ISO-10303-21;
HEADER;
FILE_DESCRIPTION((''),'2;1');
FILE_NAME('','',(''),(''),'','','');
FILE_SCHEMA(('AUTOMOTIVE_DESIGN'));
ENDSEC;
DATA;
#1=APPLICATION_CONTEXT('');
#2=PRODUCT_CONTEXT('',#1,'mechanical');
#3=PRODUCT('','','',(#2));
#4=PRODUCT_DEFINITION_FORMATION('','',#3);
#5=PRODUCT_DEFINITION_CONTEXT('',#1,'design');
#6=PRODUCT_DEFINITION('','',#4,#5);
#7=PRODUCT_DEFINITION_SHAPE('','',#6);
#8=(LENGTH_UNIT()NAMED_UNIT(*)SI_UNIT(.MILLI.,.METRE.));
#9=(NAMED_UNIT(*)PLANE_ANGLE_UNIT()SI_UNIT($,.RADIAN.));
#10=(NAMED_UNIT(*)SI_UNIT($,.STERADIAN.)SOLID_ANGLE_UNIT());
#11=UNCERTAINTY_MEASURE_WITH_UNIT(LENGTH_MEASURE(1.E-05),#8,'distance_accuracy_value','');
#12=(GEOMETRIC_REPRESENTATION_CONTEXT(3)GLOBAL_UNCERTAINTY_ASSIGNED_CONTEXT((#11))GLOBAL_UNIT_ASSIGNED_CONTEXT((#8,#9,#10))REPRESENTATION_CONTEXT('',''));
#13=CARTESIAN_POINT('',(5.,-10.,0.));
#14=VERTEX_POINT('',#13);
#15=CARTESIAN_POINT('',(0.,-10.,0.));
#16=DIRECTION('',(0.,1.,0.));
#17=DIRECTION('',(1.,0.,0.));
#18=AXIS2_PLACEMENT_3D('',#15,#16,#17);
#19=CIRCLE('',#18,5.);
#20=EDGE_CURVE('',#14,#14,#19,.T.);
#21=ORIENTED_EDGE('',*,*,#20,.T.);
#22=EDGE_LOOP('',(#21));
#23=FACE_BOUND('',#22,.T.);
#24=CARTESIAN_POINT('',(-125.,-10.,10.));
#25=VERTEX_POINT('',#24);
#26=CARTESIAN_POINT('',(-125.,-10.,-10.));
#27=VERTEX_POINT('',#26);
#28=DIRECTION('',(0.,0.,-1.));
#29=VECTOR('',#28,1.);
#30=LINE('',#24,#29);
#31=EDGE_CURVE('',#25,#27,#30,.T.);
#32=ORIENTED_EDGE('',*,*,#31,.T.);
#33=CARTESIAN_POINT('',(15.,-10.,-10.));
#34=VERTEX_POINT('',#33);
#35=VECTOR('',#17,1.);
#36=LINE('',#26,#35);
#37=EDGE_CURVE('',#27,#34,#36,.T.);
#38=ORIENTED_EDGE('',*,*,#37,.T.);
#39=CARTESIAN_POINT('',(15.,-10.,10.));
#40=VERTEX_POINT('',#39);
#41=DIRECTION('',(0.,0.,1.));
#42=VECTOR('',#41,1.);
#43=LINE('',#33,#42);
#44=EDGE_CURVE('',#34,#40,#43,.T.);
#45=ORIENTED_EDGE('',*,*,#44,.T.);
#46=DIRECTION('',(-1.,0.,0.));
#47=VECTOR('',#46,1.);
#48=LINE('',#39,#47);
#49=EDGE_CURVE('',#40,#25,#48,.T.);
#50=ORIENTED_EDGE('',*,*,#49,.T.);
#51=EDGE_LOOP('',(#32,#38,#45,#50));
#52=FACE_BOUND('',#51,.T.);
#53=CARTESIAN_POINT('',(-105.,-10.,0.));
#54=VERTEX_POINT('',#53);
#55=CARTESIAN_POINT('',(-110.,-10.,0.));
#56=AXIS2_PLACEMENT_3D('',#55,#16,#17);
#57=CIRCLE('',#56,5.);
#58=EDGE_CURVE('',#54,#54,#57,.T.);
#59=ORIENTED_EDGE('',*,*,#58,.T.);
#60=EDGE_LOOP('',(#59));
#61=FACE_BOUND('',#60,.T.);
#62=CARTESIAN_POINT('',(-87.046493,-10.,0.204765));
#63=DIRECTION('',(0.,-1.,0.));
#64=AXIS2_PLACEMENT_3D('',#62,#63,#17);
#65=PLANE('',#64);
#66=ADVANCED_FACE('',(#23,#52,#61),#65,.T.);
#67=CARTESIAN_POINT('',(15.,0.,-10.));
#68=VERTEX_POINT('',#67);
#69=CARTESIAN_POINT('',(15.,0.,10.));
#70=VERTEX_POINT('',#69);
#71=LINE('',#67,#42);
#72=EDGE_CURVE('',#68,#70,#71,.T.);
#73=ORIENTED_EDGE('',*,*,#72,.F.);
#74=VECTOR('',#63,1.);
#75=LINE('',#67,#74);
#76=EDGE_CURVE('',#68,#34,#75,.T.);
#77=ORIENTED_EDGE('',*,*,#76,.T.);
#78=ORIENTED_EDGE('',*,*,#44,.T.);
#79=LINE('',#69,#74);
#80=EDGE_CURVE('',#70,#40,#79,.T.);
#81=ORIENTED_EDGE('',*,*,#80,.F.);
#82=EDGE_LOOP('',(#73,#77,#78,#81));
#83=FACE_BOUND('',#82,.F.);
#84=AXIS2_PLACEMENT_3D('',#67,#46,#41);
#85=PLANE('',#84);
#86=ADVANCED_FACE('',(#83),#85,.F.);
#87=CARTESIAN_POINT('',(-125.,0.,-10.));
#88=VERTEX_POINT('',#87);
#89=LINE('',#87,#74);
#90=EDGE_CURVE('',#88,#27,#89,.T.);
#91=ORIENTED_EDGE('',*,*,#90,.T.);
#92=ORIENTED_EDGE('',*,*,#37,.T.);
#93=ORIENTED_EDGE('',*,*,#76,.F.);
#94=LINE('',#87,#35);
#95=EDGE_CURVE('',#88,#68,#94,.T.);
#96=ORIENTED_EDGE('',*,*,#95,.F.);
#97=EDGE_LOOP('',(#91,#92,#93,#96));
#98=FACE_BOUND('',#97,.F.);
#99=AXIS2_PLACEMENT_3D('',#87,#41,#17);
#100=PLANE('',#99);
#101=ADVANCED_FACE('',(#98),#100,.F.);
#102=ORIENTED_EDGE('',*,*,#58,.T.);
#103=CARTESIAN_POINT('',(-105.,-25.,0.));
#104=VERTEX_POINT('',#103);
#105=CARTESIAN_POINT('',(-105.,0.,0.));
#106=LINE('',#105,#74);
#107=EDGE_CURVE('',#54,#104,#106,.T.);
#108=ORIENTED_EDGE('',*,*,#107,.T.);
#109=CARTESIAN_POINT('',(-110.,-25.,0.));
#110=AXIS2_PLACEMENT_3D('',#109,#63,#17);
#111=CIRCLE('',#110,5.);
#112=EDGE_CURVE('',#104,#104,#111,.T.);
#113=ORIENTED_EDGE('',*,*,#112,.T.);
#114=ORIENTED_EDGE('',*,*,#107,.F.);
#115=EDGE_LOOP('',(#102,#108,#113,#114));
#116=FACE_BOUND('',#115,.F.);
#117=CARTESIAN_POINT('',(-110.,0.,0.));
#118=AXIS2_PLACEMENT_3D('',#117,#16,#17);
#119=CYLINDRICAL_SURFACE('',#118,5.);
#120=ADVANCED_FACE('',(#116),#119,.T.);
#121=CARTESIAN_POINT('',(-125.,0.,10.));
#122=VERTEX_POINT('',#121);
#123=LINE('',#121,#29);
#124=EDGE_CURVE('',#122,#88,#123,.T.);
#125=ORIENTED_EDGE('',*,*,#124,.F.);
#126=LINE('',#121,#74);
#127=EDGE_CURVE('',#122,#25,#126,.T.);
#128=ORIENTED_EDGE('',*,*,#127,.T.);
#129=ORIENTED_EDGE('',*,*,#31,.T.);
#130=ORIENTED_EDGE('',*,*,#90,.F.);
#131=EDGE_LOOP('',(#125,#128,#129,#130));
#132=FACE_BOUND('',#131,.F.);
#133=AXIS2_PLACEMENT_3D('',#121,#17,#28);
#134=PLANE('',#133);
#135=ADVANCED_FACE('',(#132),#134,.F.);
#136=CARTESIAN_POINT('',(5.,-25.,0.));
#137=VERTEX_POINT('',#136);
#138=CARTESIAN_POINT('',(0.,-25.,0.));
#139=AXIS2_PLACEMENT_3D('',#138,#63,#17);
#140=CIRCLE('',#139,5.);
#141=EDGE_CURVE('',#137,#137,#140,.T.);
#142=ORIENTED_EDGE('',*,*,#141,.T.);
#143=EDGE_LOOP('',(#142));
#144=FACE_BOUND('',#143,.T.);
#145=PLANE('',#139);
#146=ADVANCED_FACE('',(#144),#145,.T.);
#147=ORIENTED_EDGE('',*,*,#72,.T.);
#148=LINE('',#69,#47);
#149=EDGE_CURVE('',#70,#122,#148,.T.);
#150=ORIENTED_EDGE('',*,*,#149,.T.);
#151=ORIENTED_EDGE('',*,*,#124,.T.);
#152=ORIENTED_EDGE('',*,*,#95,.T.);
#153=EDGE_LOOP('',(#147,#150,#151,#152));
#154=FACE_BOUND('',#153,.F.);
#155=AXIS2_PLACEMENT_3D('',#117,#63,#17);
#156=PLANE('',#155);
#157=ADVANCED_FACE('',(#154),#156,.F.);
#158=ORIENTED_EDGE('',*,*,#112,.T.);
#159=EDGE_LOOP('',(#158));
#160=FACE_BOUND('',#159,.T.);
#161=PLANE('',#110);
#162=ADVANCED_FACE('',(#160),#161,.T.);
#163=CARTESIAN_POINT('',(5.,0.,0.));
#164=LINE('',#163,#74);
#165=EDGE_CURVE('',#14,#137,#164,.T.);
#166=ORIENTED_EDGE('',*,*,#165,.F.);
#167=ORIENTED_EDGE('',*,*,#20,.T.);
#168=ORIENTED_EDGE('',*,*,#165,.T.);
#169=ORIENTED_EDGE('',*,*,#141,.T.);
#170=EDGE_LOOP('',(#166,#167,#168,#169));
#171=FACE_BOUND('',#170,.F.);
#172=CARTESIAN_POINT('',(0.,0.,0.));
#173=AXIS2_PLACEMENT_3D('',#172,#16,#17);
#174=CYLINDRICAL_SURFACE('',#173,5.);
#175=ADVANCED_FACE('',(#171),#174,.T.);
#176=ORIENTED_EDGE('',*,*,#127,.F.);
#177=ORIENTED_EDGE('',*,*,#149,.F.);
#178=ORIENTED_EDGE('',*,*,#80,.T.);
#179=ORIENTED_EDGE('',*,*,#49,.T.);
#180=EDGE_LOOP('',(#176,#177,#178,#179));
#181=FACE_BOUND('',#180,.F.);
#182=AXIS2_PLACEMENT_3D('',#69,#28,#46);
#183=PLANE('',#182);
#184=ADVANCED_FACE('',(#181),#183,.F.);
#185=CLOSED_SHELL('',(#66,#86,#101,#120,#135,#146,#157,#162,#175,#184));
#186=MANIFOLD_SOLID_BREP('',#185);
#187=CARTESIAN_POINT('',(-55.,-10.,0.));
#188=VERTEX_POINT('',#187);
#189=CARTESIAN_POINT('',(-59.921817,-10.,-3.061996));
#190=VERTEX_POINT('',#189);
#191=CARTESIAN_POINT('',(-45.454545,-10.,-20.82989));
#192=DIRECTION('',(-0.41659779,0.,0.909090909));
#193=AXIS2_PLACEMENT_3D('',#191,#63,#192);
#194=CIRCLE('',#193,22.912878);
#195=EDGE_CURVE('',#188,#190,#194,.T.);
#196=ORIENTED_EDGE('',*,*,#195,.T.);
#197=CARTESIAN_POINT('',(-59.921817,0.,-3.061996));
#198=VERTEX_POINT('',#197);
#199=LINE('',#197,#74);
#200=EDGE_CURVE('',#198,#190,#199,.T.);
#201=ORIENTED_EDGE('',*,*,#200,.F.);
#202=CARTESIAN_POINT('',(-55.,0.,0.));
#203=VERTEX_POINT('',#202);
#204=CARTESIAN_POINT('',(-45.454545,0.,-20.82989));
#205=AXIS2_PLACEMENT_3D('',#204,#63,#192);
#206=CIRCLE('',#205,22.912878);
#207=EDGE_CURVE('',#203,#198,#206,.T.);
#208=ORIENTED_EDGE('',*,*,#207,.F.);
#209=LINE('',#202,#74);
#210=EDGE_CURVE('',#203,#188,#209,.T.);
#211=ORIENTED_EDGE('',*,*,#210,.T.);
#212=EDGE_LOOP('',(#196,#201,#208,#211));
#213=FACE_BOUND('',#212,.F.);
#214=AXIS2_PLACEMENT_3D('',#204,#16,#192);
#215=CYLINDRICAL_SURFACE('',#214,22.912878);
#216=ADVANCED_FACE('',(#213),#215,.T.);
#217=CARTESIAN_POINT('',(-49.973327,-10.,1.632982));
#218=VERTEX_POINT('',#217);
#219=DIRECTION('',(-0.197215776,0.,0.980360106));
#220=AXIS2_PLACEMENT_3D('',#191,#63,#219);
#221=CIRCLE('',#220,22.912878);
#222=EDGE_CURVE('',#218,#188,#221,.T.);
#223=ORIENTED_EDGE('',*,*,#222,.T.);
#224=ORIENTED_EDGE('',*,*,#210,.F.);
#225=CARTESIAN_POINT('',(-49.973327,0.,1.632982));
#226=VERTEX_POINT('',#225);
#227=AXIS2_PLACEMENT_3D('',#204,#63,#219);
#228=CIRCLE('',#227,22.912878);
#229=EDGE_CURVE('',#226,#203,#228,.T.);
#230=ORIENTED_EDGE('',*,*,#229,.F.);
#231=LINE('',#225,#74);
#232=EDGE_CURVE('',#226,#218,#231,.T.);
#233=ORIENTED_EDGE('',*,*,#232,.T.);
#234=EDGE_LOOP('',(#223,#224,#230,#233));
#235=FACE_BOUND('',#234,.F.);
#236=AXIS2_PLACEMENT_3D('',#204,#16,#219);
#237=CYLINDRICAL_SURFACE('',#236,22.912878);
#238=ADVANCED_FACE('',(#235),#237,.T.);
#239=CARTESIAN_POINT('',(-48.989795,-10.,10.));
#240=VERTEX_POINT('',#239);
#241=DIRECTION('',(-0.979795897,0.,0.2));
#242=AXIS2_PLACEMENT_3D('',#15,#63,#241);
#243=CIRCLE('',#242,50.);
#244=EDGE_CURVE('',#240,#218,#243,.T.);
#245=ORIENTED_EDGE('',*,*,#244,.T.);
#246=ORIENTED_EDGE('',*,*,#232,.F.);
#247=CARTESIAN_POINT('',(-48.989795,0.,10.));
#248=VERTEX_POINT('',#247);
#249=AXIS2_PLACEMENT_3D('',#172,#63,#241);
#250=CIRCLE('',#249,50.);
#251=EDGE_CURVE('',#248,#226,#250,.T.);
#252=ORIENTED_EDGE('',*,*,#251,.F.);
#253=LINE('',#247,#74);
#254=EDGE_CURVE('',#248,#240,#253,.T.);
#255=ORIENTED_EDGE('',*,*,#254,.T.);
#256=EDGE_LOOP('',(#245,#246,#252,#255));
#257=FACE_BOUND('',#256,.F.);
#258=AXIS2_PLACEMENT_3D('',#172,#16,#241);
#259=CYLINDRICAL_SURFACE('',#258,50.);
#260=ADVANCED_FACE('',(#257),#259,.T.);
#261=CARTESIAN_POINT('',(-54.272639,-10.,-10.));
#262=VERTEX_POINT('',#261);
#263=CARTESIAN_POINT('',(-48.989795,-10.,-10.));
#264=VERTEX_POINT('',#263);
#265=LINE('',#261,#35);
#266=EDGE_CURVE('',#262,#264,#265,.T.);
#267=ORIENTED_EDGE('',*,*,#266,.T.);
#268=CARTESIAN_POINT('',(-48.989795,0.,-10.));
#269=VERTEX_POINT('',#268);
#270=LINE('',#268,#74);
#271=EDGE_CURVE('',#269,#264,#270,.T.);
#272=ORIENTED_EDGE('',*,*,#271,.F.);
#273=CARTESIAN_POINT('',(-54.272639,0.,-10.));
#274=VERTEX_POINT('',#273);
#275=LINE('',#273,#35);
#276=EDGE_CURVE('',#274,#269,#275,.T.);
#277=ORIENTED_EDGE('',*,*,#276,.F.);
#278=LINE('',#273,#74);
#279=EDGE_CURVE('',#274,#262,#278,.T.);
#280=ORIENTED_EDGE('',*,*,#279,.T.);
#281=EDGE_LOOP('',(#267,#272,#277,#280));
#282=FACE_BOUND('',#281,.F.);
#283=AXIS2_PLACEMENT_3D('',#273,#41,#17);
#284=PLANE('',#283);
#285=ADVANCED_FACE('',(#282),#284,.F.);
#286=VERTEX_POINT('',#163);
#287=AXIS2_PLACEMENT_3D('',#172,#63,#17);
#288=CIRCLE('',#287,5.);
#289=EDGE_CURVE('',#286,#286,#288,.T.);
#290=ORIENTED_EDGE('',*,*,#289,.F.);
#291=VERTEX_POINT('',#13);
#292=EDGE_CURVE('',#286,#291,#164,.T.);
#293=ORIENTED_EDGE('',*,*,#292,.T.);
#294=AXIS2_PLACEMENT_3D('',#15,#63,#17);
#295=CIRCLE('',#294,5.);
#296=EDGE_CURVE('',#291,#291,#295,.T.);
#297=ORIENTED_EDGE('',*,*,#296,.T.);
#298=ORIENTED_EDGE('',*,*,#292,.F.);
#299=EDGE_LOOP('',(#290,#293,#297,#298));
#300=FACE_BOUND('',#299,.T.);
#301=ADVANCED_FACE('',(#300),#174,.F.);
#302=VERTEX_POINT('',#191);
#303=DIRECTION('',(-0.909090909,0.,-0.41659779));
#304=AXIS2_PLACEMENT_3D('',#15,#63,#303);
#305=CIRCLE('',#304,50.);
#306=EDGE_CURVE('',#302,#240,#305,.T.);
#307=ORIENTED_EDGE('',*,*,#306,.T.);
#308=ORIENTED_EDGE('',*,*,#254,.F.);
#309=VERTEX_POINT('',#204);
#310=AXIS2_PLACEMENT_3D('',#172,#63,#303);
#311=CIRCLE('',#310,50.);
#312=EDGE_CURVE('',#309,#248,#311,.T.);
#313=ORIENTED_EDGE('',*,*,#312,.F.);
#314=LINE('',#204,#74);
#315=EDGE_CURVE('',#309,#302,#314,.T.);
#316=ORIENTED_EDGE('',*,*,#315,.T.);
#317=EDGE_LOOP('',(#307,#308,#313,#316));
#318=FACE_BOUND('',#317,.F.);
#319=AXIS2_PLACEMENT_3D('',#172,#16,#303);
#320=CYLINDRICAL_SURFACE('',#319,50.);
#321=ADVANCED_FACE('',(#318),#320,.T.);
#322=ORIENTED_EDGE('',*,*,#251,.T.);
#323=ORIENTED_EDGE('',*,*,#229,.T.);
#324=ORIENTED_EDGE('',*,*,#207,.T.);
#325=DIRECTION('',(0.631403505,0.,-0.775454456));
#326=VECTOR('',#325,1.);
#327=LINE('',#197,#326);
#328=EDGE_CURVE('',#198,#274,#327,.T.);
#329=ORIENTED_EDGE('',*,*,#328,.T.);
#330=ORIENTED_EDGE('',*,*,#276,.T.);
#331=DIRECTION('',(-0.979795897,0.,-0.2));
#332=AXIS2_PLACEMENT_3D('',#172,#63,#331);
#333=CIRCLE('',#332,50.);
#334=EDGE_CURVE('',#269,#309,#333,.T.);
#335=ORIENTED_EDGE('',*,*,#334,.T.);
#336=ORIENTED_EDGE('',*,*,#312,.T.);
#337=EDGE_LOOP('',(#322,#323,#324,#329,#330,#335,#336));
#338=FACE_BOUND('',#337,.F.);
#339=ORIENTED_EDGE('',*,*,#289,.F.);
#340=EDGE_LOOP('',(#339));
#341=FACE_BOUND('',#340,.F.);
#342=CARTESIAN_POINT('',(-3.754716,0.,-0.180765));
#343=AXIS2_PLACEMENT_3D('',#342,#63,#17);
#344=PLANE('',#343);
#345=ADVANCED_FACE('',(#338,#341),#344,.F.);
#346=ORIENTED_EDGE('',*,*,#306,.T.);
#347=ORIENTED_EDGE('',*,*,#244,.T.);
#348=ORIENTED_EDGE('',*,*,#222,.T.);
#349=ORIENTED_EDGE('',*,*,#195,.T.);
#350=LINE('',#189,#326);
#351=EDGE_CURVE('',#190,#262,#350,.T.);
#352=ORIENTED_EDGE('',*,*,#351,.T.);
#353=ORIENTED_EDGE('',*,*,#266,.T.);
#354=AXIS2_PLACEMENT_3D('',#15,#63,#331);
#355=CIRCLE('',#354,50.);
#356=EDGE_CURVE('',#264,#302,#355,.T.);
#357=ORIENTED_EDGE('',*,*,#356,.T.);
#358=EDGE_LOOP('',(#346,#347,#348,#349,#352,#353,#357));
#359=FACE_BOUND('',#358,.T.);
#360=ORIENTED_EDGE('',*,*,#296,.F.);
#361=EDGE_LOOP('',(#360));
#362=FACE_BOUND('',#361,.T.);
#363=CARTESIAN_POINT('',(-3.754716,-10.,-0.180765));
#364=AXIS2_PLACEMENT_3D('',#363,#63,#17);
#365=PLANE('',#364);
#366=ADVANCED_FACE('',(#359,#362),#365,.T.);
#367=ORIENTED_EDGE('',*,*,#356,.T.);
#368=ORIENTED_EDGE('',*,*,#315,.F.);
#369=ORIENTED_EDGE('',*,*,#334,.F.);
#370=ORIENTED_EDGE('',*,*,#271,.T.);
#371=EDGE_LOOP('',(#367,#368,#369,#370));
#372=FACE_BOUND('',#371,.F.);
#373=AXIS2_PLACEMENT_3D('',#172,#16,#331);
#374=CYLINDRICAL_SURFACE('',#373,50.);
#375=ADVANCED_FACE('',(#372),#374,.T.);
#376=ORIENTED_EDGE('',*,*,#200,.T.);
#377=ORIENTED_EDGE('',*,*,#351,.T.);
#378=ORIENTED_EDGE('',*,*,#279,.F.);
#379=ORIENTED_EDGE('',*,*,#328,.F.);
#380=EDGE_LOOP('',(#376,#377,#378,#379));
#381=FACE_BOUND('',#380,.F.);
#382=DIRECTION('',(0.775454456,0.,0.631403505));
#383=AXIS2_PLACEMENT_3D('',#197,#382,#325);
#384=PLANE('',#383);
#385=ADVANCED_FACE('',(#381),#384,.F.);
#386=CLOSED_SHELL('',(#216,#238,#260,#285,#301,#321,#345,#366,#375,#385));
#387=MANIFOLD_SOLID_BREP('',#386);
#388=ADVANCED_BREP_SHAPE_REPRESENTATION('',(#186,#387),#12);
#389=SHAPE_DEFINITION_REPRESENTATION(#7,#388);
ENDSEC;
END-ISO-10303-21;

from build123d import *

# Parameters (mm, degrees)
F0_R     = 5
F1_DEPTH = 10
F2_DEPTH = 10
F3_DEPTH = 25


with BuildPart() as f1:
    # F0 (on Front) → F1 (new body)
    with BuildSketch(Plane.XZ):
        with BuildLine():
            ThreePointArc((-48.9897948557, -10), (-47.5316208531, -15.5159601403), (-45.4545454545, -20.8298895225))
            ThreePointArc((-45.4545454545, -20.8298895225), (10.6600358178, -48.8504210459), (50, 0))
            ThreePointArc((50, 0), (5.0254481003, 49.7468076503), (-48.9897948557, 10))
            Line((-48.9897948557, 10), (15, 10))
            Line((15, 10), (15, -10))
            Line((15, -10), (-48.9897948557, -10))
        make_face()
        with BuildLine():
            ThreePointArc((-49.9733265685, 1.6329824498), (-49.8222482499, -4.2123128242), (-48.9897948557, -10))
            Line((-48.9897948557, -10), (15, -10))
            Line((15, -10), (15, 10))
            Line((15, 10), (-48.9897948557, 10))
            ThreePointArc((-48.9897948557, 10), (-49.658096985, 5.8372428275), (-49.9733265685, 1.6329824498))
        make_face()
        Circle(F0_R, mode=Mode.SUBTRACT)
        with BuildLine():
            Line((-54.2726393539, -10), (-48.9897948557, -10))
            ThreePointArc((-48.9897948557, -10), (-49.8222482499, -4.2123128242), (-49.9733265685, 1.6329824498))
            ThreePointArc((-49.9733265685, 1.6329824498), (-52.5339055309, 0.9619130855), (-55, 0))
            ThreePointArc((-55, 0), (-57.5581280265, -1.3747285383), (-59.9218172427, -3.0619958092))
            Line((-59.9218172427, -3.0619958092), (-54.2726393539, -10))
        make_face()
    extrude(amount=F1_DEPTH)


with BuildPart() as f2:
    # F0 (on Front) → F2 (new body)
    with BuildSketch(Plane.XZ):
        with BuildLine():
            Line((-125, -10), (-54.2726393539, -10))
            Line((-54.2726393539, -10), (-59.9218172427, -3.0619958092))
            ThreePointArc((-59.9218172427, -3.0619958092), (-57.5581280265, -1.3747285383), (-55, 0))
            ThreePointArc((-55, 0), (-52.5339055309, 0.9619130855), (-49.9733265685, 1.6329824498))
            ThreePointArc((-49.9733265685, 1.6329824498), (-49.658096985, 5.8372428275), (-48.9897948557, 10))
            Line((-48.9897948557, 10), (-125, 10))
            Line((-125, 10), (-125, -10))
        make_face()
        with Locations((-110, 0)):
            Circle(F0_R, mode=Mode.SUBTRACT)
        with BuildLine():
            ThreePointArc((-49.9733265685, 1.6329824498), (-49.8222482499, -4.2123128242), (-48.9897948557, -10))
            Line((-48.9897948557, -10), (15, -10))
            Line((15, -10), (15, 10))
            Line((15, 10), (-48.9897948557, 10))
            ThreePointArc((-48.9897948557, 10), (-49.658096985, 5.8372428275), (-49.9733265685, 1.6329824498))
        make_face()
        Circle(F0_R, mode=Mode.SUBTRACT)
        with BuildLine():
            Line((-54.2726393539, -10), (-48.9897948557, -10))
            ThreePointArc((-48.9897948557, -10), (-49.8222482499, -4.2123128242), (-49.9733265685, 1.6329824498))
            ThreePointArc((-49.9733265685, 1.6329824498), (-52.5339055309, 0.9619130855), (-55, 0))
            ThreePointArc((-55, 0), (-57.5581280265, -1.3747285383), (-59.9218172427, -3.0619958092))
            Line((-59.9218172427, -3.0619958092), (-54.2726393539, -10))
        make_face()
        with Locations((-110, 0)):
            Circle(F0_R)
        Circle(F0_R)
    extrude(amount=F2_DEPTH)

    # F0 (on Front) → F3 (join)
    with BuildSketch(Plane.XZ):
        with Locations((-110, 0)):
            Circle(F0_R)
        Circle(F0_R)
    extrude(amount=F3_DEPTH)


solid = Compound([f1.part, f2.part])
